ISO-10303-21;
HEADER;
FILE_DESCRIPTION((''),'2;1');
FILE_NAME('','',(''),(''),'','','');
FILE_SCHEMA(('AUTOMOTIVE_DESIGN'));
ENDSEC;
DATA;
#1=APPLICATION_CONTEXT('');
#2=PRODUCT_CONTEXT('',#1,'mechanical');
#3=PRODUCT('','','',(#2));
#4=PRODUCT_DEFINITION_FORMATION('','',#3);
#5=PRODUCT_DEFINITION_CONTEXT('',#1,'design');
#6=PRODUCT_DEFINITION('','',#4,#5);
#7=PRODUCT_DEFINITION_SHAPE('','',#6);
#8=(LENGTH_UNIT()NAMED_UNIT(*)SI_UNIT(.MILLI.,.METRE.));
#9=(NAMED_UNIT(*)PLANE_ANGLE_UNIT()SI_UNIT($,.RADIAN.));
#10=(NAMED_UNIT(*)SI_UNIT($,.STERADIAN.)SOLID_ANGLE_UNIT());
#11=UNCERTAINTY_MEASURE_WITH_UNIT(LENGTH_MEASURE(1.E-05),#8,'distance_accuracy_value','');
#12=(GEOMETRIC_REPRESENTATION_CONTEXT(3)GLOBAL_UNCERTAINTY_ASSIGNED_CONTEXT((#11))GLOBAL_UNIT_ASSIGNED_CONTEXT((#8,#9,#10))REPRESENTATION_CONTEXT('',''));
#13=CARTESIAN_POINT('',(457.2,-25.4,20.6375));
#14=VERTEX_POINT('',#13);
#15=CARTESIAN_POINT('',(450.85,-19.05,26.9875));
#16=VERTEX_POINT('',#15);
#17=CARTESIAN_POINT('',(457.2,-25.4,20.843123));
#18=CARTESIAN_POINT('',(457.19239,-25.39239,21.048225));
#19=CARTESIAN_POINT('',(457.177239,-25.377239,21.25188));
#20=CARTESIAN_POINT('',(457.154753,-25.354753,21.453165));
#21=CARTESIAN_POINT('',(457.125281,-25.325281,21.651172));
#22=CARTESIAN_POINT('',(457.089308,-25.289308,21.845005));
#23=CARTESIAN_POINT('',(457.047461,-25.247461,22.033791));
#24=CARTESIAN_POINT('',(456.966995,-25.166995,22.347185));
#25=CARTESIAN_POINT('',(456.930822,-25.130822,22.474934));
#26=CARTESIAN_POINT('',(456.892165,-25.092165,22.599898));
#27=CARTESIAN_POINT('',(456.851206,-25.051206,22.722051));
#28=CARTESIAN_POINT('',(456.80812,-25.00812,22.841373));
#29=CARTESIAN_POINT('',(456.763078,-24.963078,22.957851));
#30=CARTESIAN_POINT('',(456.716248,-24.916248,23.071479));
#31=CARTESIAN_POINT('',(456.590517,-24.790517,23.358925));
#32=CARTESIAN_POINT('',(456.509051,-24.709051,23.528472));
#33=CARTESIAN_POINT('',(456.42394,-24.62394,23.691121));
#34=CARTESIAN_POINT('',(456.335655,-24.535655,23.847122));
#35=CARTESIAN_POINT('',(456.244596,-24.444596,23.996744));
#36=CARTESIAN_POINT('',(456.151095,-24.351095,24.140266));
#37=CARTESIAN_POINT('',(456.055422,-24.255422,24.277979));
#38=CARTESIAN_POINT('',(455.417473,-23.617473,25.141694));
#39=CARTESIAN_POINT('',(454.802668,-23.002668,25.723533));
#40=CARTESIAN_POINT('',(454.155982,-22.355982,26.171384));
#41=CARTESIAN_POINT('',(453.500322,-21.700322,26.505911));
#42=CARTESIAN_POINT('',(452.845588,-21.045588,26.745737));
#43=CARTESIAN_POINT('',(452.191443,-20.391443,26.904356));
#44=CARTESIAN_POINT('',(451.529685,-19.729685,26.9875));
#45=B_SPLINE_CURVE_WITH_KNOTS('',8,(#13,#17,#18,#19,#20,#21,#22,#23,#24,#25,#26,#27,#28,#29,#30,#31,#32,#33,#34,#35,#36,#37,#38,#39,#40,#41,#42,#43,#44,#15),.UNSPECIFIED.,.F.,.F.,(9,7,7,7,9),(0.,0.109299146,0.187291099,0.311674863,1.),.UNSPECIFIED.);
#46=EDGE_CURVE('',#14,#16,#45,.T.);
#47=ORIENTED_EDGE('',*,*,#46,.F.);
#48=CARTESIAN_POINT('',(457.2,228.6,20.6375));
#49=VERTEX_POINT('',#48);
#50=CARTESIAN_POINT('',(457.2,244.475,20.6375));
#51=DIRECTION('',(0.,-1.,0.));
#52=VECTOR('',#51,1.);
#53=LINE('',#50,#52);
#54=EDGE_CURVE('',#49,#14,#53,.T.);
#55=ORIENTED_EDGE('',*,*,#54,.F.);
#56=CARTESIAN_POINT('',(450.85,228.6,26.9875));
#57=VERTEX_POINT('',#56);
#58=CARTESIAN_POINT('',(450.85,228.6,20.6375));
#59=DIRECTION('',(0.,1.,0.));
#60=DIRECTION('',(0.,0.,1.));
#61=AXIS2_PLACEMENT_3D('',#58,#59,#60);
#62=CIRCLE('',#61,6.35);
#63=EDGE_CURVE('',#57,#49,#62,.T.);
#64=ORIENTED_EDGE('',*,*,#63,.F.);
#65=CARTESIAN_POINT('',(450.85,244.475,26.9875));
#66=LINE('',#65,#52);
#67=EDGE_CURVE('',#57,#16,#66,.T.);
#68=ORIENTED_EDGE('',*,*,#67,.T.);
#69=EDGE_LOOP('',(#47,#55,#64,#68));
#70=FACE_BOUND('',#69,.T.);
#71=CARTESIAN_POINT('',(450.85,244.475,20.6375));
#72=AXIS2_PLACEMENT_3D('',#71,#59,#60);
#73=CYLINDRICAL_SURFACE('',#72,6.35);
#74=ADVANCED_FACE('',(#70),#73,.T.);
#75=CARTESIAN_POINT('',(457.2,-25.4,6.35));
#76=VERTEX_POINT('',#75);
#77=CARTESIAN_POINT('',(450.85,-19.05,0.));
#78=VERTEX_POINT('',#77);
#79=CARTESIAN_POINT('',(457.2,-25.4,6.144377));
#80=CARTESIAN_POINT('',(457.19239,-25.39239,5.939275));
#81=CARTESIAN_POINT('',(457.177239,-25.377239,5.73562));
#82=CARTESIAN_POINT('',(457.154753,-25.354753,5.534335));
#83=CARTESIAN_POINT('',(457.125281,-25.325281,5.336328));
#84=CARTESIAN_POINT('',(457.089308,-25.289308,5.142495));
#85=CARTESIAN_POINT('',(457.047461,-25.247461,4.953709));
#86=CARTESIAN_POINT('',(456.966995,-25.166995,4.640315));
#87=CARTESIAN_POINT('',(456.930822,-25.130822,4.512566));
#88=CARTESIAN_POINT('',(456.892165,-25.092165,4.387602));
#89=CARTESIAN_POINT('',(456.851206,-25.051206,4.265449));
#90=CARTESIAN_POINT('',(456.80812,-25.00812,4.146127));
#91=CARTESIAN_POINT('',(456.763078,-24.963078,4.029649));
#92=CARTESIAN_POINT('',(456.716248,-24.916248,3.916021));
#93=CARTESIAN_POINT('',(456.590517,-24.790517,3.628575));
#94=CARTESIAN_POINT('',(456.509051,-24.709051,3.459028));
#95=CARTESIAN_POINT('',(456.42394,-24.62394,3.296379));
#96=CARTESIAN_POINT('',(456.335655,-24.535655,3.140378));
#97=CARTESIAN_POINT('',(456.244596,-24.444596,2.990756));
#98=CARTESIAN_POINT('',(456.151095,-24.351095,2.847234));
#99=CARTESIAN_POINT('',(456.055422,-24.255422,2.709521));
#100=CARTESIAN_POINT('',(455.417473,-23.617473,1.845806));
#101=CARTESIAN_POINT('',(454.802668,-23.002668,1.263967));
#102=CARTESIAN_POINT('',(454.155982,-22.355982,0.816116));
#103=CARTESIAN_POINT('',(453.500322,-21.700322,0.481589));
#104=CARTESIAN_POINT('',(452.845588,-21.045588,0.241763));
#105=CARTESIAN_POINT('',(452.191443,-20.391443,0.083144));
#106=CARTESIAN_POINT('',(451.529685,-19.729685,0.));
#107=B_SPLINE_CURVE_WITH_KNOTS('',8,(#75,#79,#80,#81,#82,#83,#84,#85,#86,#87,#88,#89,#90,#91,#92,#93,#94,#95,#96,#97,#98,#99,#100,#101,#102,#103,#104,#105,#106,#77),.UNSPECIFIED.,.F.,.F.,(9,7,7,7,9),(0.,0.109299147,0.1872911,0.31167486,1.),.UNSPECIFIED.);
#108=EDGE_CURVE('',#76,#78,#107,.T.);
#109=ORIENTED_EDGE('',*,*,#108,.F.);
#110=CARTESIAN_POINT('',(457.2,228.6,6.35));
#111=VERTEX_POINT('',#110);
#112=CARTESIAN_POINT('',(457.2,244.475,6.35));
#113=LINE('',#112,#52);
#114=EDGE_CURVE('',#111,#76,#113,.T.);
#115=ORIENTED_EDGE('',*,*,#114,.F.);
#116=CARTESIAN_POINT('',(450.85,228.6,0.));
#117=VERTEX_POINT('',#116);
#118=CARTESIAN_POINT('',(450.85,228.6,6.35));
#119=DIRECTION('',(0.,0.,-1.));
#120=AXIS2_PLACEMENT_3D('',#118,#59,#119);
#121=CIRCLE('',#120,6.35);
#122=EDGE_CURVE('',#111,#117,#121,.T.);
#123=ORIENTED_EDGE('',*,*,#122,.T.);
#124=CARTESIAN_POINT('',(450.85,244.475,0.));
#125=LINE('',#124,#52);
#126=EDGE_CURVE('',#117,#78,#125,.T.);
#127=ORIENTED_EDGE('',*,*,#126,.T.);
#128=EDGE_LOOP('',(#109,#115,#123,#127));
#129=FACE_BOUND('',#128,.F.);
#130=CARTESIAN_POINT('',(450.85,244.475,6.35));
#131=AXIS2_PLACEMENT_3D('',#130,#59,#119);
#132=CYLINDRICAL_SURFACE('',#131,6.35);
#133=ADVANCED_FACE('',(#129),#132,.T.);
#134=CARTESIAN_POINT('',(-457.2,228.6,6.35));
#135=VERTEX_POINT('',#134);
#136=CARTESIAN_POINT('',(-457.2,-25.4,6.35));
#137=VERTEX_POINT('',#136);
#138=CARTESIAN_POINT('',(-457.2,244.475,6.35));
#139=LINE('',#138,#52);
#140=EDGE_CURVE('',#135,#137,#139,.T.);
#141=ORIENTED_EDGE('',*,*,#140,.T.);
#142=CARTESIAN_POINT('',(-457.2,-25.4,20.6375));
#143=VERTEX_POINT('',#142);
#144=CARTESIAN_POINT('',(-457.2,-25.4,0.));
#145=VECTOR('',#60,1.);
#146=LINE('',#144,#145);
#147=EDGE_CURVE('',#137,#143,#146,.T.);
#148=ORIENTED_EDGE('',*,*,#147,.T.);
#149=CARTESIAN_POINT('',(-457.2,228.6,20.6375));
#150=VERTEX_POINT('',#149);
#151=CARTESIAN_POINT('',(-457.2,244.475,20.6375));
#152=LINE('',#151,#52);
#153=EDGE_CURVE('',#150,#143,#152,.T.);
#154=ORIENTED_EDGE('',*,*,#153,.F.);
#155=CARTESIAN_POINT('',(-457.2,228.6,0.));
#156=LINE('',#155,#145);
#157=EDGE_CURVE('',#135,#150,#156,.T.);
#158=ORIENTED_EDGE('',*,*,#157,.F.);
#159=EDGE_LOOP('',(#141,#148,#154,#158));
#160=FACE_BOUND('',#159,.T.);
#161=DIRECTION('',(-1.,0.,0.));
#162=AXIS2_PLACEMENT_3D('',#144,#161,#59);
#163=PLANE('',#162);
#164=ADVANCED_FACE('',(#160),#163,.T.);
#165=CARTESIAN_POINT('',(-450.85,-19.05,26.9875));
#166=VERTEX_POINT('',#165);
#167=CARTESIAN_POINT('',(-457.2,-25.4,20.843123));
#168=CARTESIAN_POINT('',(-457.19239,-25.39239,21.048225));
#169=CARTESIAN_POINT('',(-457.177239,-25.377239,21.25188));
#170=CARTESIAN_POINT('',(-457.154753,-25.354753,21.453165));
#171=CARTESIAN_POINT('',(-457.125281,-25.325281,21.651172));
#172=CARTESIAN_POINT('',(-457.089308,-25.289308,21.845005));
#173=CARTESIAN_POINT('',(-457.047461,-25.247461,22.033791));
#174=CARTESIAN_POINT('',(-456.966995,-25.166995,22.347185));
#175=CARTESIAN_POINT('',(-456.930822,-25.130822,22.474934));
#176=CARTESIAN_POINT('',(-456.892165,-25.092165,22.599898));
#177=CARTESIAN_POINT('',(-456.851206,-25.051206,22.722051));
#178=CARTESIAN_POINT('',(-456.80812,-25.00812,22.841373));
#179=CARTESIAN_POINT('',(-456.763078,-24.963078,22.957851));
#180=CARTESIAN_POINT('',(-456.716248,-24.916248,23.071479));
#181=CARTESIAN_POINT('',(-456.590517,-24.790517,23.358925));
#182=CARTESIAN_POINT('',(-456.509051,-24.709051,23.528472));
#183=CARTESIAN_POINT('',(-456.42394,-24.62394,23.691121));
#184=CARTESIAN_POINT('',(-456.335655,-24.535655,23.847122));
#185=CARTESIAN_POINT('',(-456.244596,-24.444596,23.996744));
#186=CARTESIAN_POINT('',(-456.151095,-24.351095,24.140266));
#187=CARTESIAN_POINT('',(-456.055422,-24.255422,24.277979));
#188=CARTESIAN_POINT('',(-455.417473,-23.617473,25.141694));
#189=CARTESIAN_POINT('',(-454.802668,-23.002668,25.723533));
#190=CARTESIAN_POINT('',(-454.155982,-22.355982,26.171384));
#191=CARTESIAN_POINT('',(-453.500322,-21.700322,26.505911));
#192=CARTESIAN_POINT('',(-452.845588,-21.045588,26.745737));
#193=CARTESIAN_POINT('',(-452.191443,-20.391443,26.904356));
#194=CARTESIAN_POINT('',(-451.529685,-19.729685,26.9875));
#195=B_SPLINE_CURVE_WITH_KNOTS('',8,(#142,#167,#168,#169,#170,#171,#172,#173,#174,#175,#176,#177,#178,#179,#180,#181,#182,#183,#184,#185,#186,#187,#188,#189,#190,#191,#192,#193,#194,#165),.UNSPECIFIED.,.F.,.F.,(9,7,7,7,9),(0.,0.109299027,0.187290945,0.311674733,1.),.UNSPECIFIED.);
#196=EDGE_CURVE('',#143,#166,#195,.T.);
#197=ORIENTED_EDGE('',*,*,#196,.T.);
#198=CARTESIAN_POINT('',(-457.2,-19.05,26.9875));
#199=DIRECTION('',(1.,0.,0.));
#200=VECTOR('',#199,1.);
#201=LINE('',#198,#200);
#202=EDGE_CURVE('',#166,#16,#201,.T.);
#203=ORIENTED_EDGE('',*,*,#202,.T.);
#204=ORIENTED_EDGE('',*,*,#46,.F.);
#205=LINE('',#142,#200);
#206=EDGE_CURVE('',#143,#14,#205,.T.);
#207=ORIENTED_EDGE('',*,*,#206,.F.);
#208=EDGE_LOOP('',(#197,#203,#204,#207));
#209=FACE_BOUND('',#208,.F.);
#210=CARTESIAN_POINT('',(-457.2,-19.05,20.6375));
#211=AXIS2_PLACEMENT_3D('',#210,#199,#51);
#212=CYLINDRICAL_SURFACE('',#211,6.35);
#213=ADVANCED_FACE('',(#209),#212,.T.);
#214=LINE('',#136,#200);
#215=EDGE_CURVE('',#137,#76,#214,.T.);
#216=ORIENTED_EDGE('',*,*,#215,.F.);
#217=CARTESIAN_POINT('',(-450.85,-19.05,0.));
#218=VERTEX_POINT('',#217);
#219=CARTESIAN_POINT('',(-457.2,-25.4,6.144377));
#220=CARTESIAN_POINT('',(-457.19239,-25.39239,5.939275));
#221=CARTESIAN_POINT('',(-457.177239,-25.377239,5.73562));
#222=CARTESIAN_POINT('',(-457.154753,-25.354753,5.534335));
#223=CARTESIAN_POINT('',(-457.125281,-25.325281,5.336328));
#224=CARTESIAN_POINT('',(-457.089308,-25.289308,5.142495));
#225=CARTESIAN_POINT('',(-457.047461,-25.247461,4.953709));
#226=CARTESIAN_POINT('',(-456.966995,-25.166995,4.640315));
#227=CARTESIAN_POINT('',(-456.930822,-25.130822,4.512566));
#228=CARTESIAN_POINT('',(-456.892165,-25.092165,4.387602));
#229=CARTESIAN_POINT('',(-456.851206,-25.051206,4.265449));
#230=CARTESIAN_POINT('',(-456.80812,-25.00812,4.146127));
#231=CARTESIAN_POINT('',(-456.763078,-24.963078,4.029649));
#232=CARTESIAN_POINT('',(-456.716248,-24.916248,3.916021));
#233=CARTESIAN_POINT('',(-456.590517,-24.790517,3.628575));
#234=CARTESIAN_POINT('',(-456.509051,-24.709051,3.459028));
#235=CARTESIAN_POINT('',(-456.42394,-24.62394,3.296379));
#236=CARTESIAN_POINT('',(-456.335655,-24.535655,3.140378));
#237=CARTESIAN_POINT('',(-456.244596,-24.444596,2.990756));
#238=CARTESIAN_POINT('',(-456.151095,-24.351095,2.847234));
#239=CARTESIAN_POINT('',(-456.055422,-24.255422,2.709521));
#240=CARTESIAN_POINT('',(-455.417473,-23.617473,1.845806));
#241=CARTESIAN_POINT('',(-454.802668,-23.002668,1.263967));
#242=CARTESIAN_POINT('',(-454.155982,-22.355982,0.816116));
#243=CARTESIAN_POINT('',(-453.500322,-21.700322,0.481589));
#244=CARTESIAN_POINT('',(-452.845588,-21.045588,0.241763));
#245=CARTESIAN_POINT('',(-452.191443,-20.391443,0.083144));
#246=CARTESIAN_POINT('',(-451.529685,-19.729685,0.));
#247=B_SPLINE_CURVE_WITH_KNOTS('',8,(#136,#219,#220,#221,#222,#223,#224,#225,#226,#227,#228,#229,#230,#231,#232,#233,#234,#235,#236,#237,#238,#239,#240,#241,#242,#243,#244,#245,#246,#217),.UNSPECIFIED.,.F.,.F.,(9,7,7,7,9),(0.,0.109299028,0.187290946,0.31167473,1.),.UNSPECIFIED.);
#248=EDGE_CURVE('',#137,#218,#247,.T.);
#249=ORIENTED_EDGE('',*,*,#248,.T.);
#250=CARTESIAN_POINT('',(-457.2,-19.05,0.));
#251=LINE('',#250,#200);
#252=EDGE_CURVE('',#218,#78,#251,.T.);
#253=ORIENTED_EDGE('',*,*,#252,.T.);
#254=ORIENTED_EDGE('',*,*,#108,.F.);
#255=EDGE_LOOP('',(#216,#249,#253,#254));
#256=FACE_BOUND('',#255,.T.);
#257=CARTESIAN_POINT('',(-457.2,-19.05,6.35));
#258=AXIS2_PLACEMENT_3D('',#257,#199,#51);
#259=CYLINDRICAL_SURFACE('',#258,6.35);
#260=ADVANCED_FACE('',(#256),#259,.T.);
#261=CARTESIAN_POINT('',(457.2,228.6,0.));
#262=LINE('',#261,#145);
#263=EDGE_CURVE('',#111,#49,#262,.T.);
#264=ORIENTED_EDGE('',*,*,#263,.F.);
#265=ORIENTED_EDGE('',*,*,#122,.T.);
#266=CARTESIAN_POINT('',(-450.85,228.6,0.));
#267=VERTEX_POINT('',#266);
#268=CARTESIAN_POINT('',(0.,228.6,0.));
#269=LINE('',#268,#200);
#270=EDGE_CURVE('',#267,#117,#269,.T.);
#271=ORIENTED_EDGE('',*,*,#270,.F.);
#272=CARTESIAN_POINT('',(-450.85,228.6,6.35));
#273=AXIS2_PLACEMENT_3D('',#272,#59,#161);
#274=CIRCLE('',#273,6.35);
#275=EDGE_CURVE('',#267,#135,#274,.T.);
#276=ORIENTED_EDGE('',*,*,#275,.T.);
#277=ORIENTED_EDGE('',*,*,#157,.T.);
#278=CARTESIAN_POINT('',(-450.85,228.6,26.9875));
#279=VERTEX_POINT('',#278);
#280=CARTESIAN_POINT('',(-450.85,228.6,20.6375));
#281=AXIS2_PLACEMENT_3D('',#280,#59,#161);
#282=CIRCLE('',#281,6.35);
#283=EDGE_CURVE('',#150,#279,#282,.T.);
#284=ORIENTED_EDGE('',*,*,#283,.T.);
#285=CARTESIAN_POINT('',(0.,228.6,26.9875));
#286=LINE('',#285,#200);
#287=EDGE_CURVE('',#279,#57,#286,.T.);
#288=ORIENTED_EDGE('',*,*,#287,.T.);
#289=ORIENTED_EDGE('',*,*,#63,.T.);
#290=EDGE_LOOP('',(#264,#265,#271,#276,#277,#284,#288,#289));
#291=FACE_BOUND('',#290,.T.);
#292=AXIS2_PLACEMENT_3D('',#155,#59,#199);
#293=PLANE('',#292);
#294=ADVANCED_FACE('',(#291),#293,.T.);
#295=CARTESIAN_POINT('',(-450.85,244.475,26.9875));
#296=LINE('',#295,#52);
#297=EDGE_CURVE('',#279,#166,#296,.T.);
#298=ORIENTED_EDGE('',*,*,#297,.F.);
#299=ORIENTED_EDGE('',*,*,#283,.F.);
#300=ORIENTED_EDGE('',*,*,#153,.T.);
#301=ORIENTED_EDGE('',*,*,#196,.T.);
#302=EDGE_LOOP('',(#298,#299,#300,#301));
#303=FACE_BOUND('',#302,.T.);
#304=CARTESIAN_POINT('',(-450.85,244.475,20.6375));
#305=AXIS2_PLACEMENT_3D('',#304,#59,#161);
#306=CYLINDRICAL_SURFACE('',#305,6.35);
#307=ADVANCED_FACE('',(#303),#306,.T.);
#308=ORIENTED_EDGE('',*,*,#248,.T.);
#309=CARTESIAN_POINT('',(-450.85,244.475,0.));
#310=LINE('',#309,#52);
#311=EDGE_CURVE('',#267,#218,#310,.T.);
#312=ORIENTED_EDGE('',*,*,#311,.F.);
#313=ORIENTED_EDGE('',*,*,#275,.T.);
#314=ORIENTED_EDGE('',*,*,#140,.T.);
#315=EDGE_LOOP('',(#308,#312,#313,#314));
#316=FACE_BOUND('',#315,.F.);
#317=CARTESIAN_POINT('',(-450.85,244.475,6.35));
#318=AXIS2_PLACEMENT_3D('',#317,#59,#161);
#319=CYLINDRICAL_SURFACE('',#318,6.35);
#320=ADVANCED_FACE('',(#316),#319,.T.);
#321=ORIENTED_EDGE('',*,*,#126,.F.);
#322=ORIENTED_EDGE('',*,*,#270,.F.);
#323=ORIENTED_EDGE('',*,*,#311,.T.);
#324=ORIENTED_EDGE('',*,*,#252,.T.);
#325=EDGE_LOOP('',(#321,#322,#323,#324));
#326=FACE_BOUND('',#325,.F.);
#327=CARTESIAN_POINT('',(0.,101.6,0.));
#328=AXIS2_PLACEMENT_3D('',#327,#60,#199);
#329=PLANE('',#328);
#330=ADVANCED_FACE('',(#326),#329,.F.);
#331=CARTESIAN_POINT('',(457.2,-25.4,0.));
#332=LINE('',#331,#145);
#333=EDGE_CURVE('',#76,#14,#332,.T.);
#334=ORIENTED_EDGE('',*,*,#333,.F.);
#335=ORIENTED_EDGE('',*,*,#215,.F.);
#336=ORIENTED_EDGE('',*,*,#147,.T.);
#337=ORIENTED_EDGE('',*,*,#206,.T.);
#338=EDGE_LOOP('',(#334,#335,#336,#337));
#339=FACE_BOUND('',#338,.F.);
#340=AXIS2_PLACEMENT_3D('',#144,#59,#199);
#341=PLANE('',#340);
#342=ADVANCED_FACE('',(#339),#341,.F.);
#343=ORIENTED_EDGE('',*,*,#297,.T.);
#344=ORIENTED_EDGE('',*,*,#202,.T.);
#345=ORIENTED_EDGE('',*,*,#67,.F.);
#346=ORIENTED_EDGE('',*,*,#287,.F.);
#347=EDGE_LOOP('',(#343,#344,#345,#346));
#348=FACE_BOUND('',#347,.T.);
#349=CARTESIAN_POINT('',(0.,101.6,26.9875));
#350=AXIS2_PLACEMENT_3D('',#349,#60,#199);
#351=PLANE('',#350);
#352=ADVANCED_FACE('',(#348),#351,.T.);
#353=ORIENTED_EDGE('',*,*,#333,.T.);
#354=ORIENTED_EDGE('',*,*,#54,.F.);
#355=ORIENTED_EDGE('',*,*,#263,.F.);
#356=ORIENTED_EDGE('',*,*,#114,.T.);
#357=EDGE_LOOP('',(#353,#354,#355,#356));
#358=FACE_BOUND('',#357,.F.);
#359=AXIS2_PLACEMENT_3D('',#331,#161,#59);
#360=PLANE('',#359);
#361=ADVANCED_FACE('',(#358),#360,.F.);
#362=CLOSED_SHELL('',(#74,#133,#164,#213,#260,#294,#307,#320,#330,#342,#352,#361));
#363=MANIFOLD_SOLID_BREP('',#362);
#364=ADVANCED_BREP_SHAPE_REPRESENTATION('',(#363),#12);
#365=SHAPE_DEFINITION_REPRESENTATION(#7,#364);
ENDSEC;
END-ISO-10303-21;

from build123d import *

# Parameters (mm, degrees)
F0_W        = 914.4
F0_H        = 254
F1_DEPTH    = 26.9875
F2_R        = 6.35
F3_T1_DEPTH = 279.4
F4_T1_DEPTH = 279.4


# Not quite as in the source:
# - a fillet or chamfer that OpenCascade refuses, or shapes differently, is made with other operations: its cross-section is extruded or revolved along the edge and cut away or added


with BuildPart() as f1:
    # F0 (on Top) → F1 (new body)
    with BuildSketch(Plane.XY):
        with Locations((0, 101.6)):
            Rectangle(F0_W, F0_H)
    extrude(amount=F1_DEPTH)

    # F2
    f2_edges = [f1.edges().sort_by_distance(p)[0] for p in [
        (0, -25.4, 26.9875),
        (0, -25.4, 0),
    ]]
    fillet(f2_edges, radius=F2_R)

    # F3: fillet of radius 6.35 on 2 edges, made by hand

    # F3_s2 → F3_t1 (cut)
    with BuildSketch(Plane.XZ.offset(-244.475)):
        with BuildLine():
            ThreePointArc((450.85, 26.9875), (455.3401280605, 25.1276280605), (457.2, 20.6375))
            Line((457.2, 20.6375), (457.2, 26.9875))
            Line((457.2, 26.9875), (450.85, 26.9875))
        make_face()
        with BuildLine():
            ThreePointArc((450.85, 0), (455.3401280605, 1.8598719395), (457.2, 6.35))
            Line((457.2, 6.35), (457.2, 0))
            Line((457.2, 0), (450.85, 0))
        make_face()
    extrude(amount=F3_T1_DEPTH, mode=Mode.SUBTRACT)

    # F4: fillet of radius 6.35 on 2 edges, made by hand

    # F4_s2 → F4_t1 (cut)
    with BuildSketch(Plane.XZ.offset(-244.475)):
        with BuildLine():
            ThreePointArc((-457.2, 6.35), (-455.3401280605, 1.8598719395), (-450.85, 0))
            Line((-450.85, 0), (-457.2, 0))
            Line((-457.2, 0), (-457.2, 6.35))
        make_face()
        with BuildLine():
            ThreePointArc((-457.2, 20.6375), (-455.3401280605, 25.1276280605), (-450.85, 26.9875))
            Line((-450.85, 26.9875), (-457.2, 26.9875))
            Line((-457.2, 26.9875), (-457.2, 20.6375))
        make_face()
    extrude(amount=F4_T1_DEPTH, mode=Mode.SUBTRACT)


solid = f1.part
